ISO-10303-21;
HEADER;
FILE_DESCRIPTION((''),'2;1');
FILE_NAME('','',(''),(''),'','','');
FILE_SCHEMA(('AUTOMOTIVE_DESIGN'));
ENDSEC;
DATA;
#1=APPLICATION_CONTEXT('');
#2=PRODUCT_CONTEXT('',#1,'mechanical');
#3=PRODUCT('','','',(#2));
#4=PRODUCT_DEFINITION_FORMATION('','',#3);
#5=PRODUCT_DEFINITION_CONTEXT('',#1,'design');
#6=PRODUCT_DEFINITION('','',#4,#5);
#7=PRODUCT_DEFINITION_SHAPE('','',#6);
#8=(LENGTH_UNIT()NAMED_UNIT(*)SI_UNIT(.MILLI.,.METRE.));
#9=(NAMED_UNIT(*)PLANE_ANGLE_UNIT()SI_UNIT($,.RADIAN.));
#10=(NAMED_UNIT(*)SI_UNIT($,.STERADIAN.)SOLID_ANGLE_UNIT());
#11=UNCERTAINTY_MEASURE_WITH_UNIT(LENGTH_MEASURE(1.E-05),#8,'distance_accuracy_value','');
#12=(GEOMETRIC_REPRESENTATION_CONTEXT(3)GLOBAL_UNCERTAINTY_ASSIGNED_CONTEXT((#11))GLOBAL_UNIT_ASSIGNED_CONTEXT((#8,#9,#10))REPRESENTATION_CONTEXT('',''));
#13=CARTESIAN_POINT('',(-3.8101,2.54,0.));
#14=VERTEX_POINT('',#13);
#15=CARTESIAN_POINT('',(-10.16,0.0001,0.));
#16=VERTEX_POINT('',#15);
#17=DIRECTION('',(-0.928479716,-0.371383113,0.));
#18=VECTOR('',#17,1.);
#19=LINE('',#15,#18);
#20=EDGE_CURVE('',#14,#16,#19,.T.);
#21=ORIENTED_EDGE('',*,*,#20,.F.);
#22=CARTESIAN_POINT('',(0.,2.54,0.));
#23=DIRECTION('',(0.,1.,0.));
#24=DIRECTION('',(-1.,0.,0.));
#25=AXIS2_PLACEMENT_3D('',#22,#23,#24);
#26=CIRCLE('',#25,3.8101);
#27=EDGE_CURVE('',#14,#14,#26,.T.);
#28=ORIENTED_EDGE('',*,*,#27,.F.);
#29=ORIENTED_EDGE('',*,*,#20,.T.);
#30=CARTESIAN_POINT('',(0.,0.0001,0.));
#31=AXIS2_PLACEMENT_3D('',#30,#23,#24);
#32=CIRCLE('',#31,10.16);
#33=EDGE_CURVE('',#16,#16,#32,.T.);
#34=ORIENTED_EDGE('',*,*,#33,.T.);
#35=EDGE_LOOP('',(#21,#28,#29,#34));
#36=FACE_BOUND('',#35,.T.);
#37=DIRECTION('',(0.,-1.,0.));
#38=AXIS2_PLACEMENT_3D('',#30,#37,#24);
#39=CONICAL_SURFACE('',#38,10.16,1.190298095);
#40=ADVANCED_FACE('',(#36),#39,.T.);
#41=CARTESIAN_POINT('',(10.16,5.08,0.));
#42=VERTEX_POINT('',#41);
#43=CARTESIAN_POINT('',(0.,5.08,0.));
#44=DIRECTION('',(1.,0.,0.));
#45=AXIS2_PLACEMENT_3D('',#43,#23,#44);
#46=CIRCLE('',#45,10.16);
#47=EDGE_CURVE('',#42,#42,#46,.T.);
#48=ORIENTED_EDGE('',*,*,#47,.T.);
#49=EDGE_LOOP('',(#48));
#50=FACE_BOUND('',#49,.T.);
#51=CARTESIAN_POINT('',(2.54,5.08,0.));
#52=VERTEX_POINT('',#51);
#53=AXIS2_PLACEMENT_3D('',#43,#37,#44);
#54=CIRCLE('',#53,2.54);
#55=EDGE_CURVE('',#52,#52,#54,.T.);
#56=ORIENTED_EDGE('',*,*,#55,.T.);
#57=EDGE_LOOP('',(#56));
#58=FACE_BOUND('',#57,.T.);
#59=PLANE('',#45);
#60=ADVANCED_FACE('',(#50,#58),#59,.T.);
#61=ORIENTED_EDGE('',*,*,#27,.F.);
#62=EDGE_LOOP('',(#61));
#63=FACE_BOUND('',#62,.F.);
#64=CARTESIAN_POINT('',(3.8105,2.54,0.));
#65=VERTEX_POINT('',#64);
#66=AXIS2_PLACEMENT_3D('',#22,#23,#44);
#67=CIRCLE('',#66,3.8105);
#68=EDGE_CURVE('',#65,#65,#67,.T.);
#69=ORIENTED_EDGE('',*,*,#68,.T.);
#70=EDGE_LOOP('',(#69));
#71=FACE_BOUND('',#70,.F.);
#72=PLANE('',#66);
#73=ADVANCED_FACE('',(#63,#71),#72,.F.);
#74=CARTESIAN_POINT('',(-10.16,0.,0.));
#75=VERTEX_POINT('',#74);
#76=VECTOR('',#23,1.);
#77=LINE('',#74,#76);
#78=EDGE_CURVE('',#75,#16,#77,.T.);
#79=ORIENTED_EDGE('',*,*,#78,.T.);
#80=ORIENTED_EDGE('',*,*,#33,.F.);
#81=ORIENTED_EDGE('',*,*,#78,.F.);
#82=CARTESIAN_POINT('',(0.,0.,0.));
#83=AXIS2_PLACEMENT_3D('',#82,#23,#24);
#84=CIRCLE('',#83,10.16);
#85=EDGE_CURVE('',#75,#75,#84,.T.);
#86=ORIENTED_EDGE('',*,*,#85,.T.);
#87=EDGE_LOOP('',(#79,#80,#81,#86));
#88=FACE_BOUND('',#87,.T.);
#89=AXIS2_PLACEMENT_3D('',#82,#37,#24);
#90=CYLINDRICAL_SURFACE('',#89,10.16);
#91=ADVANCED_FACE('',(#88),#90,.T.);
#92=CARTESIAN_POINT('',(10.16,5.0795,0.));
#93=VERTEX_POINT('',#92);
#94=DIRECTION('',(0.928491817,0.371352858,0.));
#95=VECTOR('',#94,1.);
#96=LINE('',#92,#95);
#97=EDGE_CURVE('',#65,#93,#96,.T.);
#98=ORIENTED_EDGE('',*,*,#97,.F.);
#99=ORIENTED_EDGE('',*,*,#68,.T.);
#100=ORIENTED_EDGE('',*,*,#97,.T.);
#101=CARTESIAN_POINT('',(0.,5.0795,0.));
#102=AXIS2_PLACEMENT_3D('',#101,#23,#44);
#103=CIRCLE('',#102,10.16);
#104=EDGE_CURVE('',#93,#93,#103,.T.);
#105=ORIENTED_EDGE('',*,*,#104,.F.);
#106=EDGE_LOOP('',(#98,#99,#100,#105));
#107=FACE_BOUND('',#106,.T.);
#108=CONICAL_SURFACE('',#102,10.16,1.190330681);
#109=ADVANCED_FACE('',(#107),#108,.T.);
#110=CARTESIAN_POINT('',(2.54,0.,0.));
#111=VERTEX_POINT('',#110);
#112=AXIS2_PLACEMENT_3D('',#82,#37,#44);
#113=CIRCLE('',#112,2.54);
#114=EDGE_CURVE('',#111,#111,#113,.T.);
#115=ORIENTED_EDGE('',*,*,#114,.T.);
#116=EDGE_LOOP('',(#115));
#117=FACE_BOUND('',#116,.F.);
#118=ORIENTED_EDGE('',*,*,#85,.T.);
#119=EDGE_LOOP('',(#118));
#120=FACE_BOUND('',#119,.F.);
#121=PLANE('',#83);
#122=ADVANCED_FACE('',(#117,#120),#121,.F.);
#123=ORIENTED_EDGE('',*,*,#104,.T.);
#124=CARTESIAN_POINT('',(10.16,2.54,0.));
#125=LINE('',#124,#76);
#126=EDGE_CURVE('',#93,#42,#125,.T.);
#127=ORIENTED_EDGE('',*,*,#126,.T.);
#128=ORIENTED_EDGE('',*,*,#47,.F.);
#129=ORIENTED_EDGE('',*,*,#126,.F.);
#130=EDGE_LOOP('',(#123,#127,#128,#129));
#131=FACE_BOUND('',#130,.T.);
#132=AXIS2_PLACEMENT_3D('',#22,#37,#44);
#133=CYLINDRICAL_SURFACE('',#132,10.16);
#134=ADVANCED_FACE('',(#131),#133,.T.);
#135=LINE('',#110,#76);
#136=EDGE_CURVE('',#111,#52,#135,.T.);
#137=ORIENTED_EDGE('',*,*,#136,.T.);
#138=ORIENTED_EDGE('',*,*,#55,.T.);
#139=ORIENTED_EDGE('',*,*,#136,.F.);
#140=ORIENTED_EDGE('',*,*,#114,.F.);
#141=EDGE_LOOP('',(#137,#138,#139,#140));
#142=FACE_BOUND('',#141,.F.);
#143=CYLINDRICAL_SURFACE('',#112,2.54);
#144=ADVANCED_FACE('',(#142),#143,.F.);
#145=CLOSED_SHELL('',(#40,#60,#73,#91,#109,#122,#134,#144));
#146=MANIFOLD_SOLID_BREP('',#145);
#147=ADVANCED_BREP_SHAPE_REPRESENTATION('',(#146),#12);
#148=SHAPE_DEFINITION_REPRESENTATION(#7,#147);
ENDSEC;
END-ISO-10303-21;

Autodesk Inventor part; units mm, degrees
ref_plane "YZ Plane" through (0, 0, 0) normal (1, 0, 0) x (0, 1, 0)
ref_plane "XZ Plane" through (0, 0, 0) normal (0, 1, 0) x (-1, 0, 0)
ref_plane "XY Plane" through (0, 0, 0) normal (0, 0, 1) x (1, 0, 0)
sketch "Sketch1" plane through (0, 0, 0) normal (0, 1, 0) x (-1, 0, 0)
  circle A0 centre (0, 0) radius 10.16
  dimension "d0" = 20.32
extrude "Extrusion1" add sketch "Sketch1" along normal blind 2.54
chamfer "Chamfer1" distance 6.35 distance2 2.54 1 edges at (10.16, 2.54, 0) measured on face at (-6.5114, 2.54, 0.3794)
sketch "Sketch2" plane through (0, 2.54, 0) normal (0, 1, 0) x (1, 0, 0)
  circle A0 centre (0, 0) radius 10.16
extrude "Extrusion2" add sketch "Sketch2" along normal blind 2.54
chamfer "Chamfer2" distance 6.35 distance2 2.54 1 edges at (-10.16, 2.54, 0) measured on face at (7.9081, 2.54, 1.1144)
sketch "Sketch3" plane through (0, 0, 0) normal (0, -1, 0) x (1, 0, 0)
  circle A0 centre (0, 0) radius 3.81 projected
  circle A1 centre (0, 0) radius 2.54
  dimension "d11" = 5.08
extrude "Extrusion3" cut sketch "Sketch3" against normal blind 5.08 contours A1
properties part number "Pulley"
